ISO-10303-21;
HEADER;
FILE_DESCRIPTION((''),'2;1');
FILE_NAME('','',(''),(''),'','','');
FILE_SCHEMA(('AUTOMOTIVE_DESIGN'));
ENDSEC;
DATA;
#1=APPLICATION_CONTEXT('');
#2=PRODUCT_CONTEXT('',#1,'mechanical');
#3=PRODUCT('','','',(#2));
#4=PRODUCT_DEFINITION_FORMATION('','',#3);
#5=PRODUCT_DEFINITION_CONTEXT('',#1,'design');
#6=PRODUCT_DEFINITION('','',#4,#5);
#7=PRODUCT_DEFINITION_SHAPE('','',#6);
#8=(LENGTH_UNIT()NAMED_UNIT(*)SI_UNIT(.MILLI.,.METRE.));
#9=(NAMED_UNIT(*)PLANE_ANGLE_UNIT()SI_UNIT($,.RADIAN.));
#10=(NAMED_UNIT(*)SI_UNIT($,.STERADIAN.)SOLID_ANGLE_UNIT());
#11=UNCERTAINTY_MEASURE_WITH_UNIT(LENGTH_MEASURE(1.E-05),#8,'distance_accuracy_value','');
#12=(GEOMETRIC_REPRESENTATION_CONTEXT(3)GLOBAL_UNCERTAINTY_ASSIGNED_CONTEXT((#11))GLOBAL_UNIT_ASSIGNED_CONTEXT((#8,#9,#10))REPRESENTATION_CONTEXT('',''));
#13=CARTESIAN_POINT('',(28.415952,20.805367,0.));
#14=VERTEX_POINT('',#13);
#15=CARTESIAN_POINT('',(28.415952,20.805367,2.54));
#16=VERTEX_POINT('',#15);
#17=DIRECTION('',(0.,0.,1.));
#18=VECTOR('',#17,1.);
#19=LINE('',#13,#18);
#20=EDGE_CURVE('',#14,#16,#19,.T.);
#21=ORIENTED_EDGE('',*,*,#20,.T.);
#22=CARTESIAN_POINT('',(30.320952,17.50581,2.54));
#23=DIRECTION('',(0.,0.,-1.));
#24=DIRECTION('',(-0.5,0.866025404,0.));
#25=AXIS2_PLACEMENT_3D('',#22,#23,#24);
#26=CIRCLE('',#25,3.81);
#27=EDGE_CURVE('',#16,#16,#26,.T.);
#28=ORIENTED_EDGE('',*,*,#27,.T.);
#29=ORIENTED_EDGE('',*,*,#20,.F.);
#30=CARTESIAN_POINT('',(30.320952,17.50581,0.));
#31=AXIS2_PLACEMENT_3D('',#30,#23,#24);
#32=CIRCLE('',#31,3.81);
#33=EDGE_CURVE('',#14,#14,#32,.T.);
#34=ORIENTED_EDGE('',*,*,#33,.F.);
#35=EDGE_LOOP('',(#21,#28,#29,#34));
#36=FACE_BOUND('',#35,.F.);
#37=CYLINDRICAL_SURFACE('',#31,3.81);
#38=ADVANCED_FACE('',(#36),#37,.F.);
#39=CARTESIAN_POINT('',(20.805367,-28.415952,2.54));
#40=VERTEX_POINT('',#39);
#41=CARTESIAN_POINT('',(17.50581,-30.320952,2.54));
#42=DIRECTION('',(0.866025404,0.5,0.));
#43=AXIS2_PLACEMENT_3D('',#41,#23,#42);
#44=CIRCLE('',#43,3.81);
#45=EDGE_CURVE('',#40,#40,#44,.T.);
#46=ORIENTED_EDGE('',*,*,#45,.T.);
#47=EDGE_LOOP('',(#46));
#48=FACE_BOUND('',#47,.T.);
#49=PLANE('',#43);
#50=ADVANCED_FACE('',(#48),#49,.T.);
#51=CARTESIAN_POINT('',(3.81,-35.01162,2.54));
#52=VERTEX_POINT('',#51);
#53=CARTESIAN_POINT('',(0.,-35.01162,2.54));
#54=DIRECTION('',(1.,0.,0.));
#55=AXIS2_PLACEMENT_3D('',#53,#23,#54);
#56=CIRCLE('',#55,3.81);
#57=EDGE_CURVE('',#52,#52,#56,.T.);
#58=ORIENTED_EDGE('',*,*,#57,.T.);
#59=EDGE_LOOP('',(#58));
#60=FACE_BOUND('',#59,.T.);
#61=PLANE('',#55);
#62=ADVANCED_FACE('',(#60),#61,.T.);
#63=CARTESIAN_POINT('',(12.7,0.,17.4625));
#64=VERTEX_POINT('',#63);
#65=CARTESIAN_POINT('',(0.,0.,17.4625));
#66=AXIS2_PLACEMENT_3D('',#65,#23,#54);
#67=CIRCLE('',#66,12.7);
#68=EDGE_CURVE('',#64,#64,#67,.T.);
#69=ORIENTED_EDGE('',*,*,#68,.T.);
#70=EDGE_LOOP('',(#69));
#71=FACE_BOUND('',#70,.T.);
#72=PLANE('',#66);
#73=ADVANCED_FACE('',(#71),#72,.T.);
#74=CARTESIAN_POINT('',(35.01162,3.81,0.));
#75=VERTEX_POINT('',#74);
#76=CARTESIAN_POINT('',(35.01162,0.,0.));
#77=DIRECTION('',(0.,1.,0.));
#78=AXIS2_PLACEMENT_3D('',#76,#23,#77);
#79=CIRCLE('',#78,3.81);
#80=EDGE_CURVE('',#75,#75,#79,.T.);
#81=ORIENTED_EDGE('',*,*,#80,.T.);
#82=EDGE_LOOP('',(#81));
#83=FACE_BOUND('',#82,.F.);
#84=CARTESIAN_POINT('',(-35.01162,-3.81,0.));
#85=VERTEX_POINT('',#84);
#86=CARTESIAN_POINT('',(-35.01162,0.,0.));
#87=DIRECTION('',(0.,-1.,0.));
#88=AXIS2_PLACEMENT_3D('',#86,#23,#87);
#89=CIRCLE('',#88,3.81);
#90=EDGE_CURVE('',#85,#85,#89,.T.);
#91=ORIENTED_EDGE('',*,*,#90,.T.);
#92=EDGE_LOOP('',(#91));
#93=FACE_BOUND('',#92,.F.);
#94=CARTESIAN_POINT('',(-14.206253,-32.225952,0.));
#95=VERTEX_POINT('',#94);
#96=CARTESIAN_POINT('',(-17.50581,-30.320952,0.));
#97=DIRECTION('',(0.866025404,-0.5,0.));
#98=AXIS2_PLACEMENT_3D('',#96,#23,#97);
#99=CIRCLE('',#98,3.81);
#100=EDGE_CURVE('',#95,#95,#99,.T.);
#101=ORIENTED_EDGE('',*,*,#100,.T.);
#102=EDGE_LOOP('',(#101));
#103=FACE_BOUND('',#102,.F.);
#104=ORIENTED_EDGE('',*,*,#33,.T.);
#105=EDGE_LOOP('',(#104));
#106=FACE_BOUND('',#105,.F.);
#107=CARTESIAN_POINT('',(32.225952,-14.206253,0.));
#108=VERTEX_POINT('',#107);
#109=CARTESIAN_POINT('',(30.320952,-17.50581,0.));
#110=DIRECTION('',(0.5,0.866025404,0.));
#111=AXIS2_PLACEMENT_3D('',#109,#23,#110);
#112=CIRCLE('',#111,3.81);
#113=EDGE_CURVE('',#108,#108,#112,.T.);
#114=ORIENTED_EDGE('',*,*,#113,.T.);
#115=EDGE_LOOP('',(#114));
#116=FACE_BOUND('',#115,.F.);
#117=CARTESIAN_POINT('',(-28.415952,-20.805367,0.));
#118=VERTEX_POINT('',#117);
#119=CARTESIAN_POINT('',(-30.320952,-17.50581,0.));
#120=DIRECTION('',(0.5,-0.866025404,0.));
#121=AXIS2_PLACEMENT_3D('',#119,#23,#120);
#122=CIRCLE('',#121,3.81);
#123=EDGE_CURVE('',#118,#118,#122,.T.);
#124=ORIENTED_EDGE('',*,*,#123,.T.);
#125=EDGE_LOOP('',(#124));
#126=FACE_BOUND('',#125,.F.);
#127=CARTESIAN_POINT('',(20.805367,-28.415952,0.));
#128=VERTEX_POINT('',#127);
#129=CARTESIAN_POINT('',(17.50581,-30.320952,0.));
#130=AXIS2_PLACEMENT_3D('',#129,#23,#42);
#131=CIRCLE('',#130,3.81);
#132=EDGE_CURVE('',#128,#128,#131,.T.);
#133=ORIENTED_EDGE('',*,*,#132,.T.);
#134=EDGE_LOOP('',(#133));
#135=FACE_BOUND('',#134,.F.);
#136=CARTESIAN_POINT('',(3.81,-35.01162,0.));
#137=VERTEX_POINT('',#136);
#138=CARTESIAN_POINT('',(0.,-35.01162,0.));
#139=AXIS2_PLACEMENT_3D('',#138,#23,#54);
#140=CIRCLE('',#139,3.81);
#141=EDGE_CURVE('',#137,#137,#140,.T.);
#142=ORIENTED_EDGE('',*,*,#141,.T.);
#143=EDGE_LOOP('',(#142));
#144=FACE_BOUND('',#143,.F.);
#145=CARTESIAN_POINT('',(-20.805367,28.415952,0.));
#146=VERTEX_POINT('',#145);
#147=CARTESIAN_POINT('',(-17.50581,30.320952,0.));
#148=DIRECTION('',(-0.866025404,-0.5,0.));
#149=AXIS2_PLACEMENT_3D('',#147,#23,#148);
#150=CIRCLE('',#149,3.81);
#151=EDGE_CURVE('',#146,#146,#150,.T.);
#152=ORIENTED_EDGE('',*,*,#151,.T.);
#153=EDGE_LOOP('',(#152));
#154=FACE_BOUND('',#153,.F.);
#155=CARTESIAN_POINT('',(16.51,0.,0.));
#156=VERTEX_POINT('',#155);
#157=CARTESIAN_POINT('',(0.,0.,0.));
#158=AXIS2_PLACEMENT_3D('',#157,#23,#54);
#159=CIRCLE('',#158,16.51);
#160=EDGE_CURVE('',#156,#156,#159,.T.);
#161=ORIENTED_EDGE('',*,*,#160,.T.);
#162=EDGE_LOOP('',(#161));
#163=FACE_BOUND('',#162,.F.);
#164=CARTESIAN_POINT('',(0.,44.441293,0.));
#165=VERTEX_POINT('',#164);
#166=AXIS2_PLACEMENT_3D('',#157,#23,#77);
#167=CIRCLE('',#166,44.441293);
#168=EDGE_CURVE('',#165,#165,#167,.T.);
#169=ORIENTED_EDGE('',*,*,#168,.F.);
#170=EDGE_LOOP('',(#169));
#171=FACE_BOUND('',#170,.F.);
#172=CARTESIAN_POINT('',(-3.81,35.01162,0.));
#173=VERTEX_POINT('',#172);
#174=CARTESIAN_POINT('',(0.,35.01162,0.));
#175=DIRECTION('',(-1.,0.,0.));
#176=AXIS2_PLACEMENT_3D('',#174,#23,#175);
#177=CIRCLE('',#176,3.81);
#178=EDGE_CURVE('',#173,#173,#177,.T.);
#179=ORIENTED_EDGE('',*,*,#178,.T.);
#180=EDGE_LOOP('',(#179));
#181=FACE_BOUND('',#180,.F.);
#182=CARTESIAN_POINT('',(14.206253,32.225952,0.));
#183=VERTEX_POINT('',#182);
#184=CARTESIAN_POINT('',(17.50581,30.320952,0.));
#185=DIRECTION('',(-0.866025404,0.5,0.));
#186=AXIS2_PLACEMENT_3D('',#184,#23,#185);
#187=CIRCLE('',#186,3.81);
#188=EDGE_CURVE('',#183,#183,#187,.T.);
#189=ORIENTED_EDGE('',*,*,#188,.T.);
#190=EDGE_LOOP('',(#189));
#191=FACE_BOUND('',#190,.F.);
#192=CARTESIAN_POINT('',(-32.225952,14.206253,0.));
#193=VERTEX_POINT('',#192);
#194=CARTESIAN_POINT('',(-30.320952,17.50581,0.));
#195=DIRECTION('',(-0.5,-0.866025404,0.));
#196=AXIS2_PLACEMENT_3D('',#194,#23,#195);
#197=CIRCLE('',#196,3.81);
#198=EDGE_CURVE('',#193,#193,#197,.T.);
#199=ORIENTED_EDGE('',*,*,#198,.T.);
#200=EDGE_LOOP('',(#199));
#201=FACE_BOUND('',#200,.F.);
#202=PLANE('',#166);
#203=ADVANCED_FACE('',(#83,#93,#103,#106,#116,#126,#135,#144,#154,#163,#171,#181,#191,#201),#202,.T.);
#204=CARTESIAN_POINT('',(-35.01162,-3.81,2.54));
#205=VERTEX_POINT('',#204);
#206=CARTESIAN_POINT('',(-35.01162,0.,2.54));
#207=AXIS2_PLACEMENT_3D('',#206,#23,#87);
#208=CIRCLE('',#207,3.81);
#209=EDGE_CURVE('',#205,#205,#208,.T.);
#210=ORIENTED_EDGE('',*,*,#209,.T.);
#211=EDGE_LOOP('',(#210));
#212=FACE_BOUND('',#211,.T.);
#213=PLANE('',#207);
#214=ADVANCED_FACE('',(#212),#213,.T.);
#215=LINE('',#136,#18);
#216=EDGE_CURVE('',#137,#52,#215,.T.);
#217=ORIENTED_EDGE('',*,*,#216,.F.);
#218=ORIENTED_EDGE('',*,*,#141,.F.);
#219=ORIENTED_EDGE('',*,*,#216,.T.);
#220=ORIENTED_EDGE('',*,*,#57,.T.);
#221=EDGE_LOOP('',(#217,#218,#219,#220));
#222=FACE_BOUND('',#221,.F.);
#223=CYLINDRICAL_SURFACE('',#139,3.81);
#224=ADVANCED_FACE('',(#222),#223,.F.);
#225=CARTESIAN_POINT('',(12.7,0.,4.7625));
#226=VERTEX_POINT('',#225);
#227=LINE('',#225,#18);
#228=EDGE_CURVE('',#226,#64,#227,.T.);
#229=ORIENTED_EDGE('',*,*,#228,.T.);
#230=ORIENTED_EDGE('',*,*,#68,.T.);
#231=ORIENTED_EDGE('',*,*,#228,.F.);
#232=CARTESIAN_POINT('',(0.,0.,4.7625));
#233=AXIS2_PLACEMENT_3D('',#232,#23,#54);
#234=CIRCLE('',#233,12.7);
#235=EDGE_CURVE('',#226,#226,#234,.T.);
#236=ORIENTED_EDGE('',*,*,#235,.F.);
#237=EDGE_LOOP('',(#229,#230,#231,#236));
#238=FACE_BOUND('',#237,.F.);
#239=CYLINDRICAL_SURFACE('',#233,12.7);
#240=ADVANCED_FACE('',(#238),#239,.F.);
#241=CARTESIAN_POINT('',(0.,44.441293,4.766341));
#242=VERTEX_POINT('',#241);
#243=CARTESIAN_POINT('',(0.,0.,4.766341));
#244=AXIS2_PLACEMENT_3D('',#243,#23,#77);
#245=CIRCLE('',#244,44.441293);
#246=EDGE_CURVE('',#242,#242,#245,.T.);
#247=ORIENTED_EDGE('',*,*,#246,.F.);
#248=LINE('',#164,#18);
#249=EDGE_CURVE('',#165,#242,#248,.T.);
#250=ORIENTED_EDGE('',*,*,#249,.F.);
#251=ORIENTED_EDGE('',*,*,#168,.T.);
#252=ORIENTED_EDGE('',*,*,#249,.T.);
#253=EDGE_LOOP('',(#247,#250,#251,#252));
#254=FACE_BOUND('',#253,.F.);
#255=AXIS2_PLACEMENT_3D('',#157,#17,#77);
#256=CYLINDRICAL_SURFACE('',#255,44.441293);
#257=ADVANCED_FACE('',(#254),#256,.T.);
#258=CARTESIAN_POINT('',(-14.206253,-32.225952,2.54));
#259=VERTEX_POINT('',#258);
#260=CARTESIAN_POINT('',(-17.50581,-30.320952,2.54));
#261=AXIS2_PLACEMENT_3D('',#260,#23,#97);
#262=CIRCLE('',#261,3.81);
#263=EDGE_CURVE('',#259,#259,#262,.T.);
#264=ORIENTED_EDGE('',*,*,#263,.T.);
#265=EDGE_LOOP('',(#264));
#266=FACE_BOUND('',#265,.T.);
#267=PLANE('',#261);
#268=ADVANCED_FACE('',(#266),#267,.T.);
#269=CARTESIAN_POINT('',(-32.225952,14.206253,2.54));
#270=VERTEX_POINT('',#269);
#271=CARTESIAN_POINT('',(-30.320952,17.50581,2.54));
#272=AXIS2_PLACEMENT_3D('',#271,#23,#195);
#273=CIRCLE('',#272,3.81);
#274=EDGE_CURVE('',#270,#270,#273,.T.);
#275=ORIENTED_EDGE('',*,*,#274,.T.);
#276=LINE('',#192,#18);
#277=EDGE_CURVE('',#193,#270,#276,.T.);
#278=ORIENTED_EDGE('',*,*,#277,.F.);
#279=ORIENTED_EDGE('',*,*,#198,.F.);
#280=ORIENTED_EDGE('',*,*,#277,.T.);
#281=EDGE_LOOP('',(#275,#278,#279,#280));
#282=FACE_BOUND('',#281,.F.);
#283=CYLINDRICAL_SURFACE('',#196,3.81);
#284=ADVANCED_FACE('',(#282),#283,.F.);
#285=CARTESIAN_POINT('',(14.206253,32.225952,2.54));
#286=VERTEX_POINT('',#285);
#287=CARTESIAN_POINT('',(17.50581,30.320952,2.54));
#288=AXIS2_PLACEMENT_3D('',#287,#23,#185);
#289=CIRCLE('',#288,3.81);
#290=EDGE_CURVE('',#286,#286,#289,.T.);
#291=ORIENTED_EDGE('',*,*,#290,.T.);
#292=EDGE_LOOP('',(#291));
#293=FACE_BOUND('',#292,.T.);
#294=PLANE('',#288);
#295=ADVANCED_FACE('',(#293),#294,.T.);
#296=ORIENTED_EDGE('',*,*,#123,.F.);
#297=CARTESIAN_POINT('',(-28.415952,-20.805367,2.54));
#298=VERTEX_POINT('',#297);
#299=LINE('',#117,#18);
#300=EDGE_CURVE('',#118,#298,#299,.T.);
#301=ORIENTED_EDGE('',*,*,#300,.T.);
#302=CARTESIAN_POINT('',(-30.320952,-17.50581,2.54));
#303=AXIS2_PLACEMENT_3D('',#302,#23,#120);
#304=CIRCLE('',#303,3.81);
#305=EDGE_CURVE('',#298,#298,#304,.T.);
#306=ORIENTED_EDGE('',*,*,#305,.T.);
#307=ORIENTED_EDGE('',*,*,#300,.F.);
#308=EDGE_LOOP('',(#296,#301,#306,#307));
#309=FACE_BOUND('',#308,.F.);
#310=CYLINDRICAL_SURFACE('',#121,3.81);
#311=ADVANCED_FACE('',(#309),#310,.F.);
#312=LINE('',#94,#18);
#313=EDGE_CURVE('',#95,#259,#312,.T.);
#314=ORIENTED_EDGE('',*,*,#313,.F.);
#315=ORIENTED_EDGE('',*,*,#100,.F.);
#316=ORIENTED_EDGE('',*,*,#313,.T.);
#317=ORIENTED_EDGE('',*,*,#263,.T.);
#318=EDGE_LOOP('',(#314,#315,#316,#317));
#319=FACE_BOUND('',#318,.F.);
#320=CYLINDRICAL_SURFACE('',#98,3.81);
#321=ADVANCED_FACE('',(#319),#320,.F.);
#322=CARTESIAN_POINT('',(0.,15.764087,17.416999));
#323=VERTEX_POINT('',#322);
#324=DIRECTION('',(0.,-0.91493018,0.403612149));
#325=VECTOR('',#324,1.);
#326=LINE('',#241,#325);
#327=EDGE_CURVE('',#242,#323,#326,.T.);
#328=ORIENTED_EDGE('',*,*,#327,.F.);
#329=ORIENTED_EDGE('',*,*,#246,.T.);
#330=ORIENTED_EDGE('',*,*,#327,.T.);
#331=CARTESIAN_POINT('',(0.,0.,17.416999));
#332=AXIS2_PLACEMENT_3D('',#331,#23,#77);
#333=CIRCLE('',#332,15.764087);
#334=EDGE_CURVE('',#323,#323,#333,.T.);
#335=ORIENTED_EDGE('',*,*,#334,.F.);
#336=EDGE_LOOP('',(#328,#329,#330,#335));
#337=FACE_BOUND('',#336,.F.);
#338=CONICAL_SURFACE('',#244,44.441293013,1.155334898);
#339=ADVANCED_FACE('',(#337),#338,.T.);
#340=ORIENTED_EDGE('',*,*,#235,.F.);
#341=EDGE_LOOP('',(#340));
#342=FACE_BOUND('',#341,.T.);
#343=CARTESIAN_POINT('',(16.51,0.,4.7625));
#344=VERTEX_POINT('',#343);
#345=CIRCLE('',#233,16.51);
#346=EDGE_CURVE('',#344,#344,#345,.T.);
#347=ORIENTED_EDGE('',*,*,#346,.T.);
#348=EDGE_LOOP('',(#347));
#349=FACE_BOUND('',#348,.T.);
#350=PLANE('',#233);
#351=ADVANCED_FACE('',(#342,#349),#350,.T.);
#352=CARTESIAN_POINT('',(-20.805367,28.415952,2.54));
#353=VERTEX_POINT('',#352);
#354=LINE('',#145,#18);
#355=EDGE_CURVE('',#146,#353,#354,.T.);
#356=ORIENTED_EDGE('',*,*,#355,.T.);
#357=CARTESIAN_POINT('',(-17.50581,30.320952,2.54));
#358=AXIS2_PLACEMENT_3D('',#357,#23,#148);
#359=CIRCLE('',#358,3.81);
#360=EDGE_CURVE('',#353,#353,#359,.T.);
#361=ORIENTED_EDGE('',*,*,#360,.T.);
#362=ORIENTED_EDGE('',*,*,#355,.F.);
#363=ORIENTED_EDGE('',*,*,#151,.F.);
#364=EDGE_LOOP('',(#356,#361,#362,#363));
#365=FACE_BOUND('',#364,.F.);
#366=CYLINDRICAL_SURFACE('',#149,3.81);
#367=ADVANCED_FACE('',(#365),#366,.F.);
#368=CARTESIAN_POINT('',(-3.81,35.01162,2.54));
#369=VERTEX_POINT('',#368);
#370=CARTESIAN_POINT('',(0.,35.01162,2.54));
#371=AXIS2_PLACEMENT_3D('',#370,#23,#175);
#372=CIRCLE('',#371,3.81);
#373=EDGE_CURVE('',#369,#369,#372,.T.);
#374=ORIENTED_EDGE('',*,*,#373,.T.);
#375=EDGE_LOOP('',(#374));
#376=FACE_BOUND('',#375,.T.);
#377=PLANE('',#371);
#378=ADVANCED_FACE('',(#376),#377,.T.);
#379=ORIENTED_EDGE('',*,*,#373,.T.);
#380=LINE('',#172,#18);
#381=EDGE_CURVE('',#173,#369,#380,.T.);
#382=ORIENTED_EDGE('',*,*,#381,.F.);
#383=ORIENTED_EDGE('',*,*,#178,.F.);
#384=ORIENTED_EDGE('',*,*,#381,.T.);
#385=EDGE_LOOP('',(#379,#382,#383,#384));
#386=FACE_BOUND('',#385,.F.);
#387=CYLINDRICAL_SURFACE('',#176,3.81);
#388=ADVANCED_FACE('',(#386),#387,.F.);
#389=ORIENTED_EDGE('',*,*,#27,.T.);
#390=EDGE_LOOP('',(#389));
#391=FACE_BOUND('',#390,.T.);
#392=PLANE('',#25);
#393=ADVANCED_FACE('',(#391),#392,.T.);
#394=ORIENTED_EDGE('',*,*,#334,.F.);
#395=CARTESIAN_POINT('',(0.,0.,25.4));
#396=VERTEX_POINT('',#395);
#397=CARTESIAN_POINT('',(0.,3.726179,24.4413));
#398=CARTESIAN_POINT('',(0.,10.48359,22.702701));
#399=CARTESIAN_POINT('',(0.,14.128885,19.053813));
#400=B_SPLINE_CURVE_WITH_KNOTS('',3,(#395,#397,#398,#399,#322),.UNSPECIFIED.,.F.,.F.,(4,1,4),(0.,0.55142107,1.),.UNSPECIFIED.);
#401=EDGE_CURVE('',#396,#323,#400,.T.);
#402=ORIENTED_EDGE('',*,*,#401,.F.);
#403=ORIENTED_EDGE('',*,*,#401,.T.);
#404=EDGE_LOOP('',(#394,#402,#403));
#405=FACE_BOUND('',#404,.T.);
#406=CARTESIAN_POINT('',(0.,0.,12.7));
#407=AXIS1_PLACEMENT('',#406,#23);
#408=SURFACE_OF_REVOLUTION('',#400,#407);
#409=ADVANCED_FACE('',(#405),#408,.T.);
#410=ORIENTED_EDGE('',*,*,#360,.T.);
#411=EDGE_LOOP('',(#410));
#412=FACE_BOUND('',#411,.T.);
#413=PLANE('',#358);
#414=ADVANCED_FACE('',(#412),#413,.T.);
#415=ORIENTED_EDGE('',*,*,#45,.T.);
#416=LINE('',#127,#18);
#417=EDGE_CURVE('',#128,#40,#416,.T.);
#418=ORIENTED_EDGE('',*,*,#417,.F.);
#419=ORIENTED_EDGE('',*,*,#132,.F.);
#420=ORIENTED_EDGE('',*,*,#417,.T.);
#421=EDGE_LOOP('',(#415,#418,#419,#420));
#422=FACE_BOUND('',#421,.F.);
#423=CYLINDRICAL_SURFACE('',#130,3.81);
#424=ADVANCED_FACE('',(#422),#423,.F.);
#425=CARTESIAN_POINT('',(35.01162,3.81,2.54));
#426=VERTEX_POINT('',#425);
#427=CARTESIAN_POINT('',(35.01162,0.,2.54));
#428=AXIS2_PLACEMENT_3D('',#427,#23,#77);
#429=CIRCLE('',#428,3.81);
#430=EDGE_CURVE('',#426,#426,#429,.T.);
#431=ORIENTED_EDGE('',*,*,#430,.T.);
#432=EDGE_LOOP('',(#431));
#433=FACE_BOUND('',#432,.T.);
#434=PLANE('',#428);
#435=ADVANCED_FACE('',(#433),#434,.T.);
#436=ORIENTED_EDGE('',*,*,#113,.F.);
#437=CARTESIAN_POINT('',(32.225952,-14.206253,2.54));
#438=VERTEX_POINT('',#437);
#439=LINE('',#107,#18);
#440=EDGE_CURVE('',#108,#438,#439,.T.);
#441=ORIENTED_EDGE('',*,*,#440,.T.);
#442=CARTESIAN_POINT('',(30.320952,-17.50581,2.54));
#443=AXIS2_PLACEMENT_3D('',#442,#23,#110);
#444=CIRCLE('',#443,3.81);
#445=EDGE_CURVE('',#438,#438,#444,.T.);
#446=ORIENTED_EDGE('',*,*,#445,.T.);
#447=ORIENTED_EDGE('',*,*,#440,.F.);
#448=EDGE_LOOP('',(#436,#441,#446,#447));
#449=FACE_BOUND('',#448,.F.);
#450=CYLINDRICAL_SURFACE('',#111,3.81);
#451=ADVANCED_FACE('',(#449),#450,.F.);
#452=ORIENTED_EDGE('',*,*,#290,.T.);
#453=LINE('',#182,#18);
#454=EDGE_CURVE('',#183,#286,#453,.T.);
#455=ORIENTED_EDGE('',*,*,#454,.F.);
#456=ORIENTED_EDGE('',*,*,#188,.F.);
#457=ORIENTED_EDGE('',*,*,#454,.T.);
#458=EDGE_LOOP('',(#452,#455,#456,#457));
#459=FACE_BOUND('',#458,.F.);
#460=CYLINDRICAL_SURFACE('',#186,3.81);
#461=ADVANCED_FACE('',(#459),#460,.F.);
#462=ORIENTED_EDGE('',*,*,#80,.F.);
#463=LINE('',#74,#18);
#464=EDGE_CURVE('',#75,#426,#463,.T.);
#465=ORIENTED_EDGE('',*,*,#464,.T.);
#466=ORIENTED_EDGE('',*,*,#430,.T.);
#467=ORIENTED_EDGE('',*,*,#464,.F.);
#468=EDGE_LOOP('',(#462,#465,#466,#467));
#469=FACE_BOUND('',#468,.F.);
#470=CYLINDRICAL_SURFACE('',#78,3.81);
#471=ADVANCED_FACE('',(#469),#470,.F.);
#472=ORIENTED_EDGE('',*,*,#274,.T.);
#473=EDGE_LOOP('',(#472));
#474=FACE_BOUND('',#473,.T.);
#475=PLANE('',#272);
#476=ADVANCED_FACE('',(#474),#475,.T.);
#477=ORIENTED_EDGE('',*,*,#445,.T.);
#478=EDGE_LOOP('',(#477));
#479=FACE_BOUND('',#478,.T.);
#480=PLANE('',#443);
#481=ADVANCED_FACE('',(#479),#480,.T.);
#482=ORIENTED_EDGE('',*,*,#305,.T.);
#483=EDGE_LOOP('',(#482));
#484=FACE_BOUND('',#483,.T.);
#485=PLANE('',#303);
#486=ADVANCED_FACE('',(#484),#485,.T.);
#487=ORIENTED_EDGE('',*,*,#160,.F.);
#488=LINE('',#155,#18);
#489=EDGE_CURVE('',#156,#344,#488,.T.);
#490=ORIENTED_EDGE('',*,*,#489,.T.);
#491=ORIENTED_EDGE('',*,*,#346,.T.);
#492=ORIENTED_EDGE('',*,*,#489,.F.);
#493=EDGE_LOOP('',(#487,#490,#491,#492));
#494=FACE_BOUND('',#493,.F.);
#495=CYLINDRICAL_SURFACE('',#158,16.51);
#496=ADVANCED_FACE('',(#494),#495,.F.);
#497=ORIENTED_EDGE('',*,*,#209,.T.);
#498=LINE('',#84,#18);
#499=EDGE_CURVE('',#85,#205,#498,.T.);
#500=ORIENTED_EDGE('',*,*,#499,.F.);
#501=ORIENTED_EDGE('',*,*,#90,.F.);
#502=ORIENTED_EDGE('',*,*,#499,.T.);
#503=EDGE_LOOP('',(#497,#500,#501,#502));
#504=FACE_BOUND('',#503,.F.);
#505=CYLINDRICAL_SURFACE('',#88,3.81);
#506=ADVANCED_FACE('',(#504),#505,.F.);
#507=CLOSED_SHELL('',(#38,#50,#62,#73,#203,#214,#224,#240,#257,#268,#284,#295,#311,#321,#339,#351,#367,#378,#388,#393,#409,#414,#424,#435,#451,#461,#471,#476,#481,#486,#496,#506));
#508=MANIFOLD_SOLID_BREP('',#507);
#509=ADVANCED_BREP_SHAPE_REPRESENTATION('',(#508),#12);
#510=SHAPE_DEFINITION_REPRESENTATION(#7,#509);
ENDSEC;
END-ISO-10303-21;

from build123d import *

# Parameters (mm, degrees)
F2_R            = 16.51
F3_DEPTH        = 4.7625
F4_R            = 12.7
F5_DEPTH        = 12.7
F6_R            = 3.81
F7_DEPTH        = 2.54
F7_COPIES_COUNT = 12


# Not quite as in the source:
# - a pattern or mirror of a feature is missing from the dataset's text; its kind, count and spacing are read off the source's solid


with BuildPart() as f1:
    # F0 (on Right) → F1 (revolve)
    with BuildSketch(Plane.YZ):
        with BuildLine():
            Line((0, 25.4), (0, 0))
            Line((0, 0), (44.4412930132, 0))
            Line((44.4412930132, 0), (44.4412930132, 4.7663409987))
            Line((44.4412930132, 4.7663409987), (15.7640874386, 17.416998744))
            add(Edge.make_bspline(
                [(0, 25.4), (3.7261787695, 24.441300081), (10.4835897095, 22.7027014465), (14.128884846, 19.0538131517), (15.7640874386, 17.416998744)],
                knots=[0, 0, 0, 0, 0.5514210698, 1, 1, 1, 1], degree=3))
        make_face()
    revolve(axis=Axis((0, 0, 12.7), (0, 0, -1)))

    # F2 (on face) → F3 (cut)
    with BuildSketch(Plane(origin=(0, 0, 0), x_dir=(1, 0, 0), z_dir=(0, 0, -1))):
        Circle(F2_R)
    extrude(amount=-F3_DEPTH, mode=Mode.SUBTRACT)

    # F4 (on face) → F5 (cut)
    with BuildSketch(Plane(origin=(0, 0, 4.7625), x_dir=(1, 0, 0), z_dir=(0, 0, -1))):
        Circle(F4_R)
    extrude(amount=-F5_DEPTH, mode=Mode.SUBTRACT)

    # F6 (on face) → F7 (cut)
    with BuildSketch(Plane(origin=(0, 0, 0), x_dir=(1, 0, 0), z_dir=(0, 0, -1))):
        with Locations((0, 35.0116197045)):
            Circle(F6_R)
    f7 = extrude(amount=-F7_DEPTH, mode=Mode.SUBTRACT)

    # F7_copies: F7 ×12 about axis
    f7_copies_axis = Axis((0, 0, 0), (0, 0, 1))
    for i in range(1, F7_COPIES_COUNT):
        add(f7.rotate(f7_copies_axis, i * 360 / F7_COPIES_COUNT), mode=Mode.SUBTRACT)


solid = f1.part
